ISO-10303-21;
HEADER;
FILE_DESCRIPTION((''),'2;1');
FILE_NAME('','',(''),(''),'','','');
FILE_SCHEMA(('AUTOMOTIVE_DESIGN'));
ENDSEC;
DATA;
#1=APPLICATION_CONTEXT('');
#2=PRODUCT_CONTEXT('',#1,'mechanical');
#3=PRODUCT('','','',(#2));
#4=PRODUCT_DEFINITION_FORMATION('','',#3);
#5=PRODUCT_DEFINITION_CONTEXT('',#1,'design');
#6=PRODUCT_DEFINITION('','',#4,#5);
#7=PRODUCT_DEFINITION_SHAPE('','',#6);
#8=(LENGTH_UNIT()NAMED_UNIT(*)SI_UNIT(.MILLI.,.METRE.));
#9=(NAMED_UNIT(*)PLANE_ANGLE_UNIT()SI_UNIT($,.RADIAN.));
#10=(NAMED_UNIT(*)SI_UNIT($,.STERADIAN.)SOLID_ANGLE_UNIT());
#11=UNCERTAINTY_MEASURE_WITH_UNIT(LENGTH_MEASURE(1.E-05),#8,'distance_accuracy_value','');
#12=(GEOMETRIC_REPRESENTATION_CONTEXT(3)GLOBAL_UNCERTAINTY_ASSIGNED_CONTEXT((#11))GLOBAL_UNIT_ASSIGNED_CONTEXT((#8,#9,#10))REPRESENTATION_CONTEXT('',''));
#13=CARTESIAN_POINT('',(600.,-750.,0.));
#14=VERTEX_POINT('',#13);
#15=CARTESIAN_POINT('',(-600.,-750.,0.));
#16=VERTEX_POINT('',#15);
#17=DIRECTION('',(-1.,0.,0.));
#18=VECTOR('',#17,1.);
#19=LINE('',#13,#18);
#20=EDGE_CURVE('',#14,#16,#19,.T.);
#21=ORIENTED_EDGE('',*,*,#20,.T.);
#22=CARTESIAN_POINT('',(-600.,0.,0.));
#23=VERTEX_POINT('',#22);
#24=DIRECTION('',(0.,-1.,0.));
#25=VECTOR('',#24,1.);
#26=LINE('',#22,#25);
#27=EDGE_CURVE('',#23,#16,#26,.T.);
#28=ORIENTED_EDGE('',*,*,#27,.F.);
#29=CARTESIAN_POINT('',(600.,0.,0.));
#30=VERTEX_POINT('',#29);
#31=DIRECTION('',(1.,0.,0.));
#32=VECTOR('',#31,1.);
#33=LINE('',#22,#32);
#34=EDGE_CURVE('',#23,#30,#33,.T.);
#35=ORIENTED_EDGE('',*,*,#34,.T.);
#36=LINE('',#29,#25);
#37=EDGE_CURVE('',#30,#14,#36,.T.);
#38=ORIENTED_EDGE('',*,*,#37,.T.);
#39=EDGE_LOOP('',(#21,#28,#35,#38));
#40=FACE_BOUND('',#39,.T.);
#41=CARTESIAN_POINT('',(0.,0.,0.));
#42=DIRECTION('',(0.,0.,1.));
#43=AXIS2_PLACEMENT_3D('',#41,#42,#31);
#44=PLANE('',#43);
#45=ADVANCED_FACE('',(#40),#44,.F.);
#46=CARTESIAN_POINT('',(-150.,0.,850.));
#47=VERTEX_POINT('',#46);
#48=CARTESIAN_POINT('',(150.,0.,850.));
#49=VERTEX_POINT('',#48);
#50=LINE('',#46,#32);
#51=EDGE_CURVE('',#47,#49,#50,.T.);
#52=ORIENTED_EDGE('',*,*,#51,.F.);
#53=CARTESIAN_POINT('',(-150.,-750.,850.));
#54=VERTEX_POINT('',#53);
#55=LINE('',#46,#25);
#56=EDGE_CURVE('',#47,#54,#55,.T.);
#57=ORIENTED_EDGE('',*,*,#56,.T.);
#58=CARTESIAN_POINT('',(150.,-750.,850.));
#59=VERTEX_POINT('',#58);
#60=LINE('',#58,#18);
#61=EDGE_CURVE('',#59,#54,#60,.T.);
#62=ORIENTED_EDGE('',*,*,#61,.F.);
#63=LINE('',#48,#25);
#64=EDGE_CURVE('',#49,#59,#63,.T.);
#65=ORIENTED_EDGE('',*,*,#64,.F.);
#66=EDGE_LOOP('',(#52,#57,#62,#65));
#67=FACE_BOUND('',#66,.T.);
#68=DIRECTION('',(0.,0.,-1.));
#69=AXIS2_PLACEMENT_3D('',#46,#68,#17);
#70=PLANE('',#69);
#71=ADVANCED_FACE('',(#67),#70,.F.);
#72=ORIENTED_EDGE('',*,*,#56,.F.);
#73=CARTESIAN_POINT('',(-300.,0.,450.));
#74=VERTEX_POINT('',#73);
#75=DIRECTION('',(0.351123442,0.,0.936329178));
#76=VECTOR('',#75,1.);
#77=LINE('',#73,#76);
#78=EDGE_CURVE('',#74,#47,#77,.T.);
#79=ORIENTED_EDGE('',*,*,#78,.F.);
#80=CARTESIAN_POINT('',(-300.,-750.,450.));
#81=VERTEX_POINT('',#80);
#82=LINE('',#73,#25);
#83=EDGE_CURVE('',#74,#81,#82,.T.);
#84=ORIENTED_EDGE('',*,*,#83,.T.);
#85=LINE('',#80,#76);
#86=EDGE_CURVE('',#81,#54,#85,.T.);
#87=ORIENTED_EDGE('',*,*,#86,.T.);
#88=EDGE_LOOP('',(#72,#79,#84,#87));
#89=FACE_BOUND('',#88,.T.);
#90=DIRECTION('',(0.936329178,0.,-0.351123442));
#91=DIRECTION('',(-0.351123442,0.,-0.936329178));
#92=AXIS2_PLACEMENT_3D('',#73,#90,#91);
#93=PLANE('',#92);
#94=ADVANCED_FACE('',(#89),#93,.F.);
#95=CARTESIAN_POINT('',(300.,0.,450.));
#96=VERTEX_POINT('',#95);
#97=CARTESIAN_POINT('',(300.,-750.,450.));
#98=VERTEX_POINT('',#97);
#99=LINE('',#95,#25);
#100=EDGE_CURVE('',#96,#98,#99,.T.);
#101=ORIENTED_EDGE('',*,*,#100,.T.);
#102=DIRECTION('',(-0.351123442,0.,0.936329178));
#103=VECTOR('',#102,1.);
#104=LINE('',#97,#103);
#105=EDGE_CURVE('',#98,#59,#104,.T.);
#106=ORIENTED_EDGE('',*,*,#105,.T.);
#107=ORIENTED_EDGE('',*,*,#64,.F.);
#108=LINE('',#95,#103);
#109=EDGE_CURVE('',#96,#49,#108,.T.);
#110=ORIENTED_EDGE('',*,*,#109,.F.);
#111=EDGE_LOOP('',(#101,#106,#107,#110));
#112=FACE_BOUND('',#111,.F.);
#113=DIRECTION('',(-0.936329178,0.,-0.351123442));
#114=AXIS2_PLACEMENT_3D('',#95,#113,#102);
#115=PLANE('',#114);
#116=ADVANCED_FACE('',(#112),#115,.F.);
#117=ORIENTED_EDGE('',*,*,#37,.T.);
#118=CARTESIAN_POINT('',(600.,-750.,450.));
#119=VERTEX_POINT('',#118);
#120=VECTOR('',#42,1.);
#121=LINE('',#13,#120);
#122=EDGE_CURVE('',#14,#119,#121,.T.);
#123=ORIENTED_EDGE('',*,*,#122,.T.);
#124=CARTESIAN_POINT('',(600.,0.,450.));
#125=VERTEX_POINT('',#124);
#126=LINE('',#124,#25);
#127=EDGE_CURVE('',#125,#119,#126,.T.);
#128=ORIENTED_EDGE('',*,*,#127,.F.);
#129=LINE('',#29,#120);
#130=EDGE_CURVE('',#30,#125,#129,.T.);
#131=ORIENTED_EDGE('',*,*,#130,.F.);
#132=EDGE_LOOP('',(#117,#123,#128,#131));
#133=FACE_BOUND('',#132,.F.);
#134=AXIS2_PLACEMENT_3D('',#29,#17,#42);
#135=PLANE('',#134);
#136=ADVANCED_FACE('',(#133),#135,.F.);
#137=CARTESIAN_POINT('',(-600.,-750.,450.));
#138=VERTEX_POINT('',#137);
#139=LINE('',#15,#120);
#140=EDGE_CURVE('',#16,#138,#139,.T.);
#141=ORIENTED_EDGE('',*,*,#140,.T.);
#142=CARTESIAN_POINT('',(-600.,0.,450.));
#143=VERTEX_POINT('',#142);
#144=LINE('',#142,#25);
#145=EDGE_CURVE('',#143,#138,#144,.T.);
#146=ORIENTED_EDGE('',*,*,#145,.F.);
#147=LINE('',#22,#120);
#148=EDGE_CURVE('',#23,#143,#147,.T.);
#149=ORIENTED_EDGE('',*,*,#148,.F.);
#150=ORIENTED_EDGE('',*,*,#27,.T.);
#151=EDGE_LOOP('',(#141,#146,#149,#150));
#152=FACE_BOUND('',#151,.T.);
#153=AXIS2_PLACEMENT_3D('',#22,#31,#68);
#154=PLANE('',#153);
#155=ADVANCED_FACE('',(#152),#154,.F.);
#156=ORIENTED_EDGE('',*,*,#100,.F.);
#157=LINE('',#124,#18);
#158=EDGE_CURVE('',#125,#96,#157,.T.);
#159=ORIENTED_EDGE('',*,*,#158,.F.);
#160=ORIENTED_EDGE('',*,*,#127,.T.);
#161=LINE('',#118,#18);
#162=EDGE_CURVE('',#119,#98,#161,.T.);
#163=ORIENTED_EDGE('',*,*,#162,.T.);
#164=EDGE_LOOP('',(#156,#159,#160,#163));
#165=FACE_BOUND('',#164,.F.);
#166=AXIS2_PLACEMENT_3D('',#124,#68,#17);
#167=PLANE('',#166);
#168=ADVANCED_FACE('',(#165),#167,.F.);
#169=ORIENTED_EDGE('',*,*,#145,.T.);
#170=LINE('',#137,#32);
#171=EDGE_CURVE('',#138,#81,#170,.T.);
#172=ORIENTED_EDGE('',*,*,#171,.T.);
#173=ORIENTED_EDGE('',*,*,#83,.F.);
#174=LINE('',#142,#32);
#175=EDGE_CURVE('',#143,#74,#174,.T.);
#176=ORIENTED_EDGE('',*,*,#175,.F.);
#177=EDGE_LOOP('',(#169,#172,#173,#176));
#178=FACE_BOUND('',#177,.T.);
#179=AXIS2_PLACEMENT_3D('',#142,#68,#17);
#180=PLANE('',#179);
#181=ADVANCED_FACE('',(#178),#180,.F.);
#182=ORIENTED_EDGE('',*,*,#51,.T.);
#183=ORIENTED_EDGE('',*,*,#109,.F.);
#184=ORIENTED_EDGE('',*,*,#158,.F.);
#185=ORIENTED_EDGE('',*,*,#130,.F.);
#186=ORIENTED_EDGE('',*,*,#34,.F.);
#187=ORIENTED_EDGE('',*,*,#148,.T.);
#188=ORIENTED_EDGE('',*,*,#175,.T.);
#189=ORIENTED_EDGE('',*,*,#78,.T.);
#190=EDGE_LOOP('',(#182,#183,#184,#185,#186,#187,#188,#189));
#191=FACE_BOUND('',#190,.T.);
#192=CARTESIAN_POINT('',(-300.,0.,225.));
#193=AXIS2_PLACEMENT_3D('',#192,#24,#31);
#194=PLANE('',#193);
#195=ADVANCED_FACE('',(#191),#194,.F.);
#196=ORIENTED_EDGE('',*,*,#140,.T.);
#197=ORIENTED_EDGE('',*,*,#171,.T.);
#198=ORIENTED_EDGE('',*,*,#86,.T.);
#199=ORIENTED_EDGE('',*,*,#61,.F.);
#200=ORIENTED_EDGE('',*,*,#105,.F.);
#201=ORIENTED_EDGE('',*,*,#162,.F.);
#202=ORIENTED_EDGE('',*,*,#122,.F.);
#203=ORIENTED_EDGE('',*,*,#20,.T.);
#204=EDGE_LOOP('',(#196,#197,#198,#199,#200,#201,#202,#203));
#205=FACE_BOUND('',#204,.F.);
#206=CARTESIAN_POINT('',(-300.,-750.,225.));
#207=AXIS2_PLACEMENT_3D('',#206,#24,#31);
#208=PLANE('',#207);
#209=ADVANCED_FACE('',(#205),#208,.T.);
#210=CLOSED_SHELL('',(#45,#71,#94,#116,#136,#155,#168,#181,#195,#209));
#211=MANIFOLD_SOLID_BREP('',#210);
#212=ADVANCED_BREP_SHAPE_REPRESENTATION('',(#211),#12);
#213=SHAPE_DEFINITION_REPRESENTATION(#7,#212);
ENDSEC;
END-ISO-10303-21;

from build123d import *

# Parameters (mm, degrees)
F1_DEPTH = 750


# Not quite as in the source:
# - a pattern or mirror of a feature is missing from the dataset's text; its kind, count and spacing are read off the source's solid


with BuildPart() as f1:
    # F0 (on Front) → F1 (new body)
    with BuildSketch(Plane.XZ):
        Polygon((0, 450), (0, 0), (600, 0), (600, 450), (300, 450), align=None)
        Polygon((0, 850), (0, 450), (300, 450), (150, 850), align=None)
    extrude(amount=F1_DEPTH)

    # F1_copies: F1 across plane


with BuildPart() as f1_1:
    add(f1.part)
    add(f1.part.mirror(Plane(origin=(0, 0, 0), x_dir=(0, 0, -1), z_dir=(-1, 0, 0))))


solid = f1_1.part
